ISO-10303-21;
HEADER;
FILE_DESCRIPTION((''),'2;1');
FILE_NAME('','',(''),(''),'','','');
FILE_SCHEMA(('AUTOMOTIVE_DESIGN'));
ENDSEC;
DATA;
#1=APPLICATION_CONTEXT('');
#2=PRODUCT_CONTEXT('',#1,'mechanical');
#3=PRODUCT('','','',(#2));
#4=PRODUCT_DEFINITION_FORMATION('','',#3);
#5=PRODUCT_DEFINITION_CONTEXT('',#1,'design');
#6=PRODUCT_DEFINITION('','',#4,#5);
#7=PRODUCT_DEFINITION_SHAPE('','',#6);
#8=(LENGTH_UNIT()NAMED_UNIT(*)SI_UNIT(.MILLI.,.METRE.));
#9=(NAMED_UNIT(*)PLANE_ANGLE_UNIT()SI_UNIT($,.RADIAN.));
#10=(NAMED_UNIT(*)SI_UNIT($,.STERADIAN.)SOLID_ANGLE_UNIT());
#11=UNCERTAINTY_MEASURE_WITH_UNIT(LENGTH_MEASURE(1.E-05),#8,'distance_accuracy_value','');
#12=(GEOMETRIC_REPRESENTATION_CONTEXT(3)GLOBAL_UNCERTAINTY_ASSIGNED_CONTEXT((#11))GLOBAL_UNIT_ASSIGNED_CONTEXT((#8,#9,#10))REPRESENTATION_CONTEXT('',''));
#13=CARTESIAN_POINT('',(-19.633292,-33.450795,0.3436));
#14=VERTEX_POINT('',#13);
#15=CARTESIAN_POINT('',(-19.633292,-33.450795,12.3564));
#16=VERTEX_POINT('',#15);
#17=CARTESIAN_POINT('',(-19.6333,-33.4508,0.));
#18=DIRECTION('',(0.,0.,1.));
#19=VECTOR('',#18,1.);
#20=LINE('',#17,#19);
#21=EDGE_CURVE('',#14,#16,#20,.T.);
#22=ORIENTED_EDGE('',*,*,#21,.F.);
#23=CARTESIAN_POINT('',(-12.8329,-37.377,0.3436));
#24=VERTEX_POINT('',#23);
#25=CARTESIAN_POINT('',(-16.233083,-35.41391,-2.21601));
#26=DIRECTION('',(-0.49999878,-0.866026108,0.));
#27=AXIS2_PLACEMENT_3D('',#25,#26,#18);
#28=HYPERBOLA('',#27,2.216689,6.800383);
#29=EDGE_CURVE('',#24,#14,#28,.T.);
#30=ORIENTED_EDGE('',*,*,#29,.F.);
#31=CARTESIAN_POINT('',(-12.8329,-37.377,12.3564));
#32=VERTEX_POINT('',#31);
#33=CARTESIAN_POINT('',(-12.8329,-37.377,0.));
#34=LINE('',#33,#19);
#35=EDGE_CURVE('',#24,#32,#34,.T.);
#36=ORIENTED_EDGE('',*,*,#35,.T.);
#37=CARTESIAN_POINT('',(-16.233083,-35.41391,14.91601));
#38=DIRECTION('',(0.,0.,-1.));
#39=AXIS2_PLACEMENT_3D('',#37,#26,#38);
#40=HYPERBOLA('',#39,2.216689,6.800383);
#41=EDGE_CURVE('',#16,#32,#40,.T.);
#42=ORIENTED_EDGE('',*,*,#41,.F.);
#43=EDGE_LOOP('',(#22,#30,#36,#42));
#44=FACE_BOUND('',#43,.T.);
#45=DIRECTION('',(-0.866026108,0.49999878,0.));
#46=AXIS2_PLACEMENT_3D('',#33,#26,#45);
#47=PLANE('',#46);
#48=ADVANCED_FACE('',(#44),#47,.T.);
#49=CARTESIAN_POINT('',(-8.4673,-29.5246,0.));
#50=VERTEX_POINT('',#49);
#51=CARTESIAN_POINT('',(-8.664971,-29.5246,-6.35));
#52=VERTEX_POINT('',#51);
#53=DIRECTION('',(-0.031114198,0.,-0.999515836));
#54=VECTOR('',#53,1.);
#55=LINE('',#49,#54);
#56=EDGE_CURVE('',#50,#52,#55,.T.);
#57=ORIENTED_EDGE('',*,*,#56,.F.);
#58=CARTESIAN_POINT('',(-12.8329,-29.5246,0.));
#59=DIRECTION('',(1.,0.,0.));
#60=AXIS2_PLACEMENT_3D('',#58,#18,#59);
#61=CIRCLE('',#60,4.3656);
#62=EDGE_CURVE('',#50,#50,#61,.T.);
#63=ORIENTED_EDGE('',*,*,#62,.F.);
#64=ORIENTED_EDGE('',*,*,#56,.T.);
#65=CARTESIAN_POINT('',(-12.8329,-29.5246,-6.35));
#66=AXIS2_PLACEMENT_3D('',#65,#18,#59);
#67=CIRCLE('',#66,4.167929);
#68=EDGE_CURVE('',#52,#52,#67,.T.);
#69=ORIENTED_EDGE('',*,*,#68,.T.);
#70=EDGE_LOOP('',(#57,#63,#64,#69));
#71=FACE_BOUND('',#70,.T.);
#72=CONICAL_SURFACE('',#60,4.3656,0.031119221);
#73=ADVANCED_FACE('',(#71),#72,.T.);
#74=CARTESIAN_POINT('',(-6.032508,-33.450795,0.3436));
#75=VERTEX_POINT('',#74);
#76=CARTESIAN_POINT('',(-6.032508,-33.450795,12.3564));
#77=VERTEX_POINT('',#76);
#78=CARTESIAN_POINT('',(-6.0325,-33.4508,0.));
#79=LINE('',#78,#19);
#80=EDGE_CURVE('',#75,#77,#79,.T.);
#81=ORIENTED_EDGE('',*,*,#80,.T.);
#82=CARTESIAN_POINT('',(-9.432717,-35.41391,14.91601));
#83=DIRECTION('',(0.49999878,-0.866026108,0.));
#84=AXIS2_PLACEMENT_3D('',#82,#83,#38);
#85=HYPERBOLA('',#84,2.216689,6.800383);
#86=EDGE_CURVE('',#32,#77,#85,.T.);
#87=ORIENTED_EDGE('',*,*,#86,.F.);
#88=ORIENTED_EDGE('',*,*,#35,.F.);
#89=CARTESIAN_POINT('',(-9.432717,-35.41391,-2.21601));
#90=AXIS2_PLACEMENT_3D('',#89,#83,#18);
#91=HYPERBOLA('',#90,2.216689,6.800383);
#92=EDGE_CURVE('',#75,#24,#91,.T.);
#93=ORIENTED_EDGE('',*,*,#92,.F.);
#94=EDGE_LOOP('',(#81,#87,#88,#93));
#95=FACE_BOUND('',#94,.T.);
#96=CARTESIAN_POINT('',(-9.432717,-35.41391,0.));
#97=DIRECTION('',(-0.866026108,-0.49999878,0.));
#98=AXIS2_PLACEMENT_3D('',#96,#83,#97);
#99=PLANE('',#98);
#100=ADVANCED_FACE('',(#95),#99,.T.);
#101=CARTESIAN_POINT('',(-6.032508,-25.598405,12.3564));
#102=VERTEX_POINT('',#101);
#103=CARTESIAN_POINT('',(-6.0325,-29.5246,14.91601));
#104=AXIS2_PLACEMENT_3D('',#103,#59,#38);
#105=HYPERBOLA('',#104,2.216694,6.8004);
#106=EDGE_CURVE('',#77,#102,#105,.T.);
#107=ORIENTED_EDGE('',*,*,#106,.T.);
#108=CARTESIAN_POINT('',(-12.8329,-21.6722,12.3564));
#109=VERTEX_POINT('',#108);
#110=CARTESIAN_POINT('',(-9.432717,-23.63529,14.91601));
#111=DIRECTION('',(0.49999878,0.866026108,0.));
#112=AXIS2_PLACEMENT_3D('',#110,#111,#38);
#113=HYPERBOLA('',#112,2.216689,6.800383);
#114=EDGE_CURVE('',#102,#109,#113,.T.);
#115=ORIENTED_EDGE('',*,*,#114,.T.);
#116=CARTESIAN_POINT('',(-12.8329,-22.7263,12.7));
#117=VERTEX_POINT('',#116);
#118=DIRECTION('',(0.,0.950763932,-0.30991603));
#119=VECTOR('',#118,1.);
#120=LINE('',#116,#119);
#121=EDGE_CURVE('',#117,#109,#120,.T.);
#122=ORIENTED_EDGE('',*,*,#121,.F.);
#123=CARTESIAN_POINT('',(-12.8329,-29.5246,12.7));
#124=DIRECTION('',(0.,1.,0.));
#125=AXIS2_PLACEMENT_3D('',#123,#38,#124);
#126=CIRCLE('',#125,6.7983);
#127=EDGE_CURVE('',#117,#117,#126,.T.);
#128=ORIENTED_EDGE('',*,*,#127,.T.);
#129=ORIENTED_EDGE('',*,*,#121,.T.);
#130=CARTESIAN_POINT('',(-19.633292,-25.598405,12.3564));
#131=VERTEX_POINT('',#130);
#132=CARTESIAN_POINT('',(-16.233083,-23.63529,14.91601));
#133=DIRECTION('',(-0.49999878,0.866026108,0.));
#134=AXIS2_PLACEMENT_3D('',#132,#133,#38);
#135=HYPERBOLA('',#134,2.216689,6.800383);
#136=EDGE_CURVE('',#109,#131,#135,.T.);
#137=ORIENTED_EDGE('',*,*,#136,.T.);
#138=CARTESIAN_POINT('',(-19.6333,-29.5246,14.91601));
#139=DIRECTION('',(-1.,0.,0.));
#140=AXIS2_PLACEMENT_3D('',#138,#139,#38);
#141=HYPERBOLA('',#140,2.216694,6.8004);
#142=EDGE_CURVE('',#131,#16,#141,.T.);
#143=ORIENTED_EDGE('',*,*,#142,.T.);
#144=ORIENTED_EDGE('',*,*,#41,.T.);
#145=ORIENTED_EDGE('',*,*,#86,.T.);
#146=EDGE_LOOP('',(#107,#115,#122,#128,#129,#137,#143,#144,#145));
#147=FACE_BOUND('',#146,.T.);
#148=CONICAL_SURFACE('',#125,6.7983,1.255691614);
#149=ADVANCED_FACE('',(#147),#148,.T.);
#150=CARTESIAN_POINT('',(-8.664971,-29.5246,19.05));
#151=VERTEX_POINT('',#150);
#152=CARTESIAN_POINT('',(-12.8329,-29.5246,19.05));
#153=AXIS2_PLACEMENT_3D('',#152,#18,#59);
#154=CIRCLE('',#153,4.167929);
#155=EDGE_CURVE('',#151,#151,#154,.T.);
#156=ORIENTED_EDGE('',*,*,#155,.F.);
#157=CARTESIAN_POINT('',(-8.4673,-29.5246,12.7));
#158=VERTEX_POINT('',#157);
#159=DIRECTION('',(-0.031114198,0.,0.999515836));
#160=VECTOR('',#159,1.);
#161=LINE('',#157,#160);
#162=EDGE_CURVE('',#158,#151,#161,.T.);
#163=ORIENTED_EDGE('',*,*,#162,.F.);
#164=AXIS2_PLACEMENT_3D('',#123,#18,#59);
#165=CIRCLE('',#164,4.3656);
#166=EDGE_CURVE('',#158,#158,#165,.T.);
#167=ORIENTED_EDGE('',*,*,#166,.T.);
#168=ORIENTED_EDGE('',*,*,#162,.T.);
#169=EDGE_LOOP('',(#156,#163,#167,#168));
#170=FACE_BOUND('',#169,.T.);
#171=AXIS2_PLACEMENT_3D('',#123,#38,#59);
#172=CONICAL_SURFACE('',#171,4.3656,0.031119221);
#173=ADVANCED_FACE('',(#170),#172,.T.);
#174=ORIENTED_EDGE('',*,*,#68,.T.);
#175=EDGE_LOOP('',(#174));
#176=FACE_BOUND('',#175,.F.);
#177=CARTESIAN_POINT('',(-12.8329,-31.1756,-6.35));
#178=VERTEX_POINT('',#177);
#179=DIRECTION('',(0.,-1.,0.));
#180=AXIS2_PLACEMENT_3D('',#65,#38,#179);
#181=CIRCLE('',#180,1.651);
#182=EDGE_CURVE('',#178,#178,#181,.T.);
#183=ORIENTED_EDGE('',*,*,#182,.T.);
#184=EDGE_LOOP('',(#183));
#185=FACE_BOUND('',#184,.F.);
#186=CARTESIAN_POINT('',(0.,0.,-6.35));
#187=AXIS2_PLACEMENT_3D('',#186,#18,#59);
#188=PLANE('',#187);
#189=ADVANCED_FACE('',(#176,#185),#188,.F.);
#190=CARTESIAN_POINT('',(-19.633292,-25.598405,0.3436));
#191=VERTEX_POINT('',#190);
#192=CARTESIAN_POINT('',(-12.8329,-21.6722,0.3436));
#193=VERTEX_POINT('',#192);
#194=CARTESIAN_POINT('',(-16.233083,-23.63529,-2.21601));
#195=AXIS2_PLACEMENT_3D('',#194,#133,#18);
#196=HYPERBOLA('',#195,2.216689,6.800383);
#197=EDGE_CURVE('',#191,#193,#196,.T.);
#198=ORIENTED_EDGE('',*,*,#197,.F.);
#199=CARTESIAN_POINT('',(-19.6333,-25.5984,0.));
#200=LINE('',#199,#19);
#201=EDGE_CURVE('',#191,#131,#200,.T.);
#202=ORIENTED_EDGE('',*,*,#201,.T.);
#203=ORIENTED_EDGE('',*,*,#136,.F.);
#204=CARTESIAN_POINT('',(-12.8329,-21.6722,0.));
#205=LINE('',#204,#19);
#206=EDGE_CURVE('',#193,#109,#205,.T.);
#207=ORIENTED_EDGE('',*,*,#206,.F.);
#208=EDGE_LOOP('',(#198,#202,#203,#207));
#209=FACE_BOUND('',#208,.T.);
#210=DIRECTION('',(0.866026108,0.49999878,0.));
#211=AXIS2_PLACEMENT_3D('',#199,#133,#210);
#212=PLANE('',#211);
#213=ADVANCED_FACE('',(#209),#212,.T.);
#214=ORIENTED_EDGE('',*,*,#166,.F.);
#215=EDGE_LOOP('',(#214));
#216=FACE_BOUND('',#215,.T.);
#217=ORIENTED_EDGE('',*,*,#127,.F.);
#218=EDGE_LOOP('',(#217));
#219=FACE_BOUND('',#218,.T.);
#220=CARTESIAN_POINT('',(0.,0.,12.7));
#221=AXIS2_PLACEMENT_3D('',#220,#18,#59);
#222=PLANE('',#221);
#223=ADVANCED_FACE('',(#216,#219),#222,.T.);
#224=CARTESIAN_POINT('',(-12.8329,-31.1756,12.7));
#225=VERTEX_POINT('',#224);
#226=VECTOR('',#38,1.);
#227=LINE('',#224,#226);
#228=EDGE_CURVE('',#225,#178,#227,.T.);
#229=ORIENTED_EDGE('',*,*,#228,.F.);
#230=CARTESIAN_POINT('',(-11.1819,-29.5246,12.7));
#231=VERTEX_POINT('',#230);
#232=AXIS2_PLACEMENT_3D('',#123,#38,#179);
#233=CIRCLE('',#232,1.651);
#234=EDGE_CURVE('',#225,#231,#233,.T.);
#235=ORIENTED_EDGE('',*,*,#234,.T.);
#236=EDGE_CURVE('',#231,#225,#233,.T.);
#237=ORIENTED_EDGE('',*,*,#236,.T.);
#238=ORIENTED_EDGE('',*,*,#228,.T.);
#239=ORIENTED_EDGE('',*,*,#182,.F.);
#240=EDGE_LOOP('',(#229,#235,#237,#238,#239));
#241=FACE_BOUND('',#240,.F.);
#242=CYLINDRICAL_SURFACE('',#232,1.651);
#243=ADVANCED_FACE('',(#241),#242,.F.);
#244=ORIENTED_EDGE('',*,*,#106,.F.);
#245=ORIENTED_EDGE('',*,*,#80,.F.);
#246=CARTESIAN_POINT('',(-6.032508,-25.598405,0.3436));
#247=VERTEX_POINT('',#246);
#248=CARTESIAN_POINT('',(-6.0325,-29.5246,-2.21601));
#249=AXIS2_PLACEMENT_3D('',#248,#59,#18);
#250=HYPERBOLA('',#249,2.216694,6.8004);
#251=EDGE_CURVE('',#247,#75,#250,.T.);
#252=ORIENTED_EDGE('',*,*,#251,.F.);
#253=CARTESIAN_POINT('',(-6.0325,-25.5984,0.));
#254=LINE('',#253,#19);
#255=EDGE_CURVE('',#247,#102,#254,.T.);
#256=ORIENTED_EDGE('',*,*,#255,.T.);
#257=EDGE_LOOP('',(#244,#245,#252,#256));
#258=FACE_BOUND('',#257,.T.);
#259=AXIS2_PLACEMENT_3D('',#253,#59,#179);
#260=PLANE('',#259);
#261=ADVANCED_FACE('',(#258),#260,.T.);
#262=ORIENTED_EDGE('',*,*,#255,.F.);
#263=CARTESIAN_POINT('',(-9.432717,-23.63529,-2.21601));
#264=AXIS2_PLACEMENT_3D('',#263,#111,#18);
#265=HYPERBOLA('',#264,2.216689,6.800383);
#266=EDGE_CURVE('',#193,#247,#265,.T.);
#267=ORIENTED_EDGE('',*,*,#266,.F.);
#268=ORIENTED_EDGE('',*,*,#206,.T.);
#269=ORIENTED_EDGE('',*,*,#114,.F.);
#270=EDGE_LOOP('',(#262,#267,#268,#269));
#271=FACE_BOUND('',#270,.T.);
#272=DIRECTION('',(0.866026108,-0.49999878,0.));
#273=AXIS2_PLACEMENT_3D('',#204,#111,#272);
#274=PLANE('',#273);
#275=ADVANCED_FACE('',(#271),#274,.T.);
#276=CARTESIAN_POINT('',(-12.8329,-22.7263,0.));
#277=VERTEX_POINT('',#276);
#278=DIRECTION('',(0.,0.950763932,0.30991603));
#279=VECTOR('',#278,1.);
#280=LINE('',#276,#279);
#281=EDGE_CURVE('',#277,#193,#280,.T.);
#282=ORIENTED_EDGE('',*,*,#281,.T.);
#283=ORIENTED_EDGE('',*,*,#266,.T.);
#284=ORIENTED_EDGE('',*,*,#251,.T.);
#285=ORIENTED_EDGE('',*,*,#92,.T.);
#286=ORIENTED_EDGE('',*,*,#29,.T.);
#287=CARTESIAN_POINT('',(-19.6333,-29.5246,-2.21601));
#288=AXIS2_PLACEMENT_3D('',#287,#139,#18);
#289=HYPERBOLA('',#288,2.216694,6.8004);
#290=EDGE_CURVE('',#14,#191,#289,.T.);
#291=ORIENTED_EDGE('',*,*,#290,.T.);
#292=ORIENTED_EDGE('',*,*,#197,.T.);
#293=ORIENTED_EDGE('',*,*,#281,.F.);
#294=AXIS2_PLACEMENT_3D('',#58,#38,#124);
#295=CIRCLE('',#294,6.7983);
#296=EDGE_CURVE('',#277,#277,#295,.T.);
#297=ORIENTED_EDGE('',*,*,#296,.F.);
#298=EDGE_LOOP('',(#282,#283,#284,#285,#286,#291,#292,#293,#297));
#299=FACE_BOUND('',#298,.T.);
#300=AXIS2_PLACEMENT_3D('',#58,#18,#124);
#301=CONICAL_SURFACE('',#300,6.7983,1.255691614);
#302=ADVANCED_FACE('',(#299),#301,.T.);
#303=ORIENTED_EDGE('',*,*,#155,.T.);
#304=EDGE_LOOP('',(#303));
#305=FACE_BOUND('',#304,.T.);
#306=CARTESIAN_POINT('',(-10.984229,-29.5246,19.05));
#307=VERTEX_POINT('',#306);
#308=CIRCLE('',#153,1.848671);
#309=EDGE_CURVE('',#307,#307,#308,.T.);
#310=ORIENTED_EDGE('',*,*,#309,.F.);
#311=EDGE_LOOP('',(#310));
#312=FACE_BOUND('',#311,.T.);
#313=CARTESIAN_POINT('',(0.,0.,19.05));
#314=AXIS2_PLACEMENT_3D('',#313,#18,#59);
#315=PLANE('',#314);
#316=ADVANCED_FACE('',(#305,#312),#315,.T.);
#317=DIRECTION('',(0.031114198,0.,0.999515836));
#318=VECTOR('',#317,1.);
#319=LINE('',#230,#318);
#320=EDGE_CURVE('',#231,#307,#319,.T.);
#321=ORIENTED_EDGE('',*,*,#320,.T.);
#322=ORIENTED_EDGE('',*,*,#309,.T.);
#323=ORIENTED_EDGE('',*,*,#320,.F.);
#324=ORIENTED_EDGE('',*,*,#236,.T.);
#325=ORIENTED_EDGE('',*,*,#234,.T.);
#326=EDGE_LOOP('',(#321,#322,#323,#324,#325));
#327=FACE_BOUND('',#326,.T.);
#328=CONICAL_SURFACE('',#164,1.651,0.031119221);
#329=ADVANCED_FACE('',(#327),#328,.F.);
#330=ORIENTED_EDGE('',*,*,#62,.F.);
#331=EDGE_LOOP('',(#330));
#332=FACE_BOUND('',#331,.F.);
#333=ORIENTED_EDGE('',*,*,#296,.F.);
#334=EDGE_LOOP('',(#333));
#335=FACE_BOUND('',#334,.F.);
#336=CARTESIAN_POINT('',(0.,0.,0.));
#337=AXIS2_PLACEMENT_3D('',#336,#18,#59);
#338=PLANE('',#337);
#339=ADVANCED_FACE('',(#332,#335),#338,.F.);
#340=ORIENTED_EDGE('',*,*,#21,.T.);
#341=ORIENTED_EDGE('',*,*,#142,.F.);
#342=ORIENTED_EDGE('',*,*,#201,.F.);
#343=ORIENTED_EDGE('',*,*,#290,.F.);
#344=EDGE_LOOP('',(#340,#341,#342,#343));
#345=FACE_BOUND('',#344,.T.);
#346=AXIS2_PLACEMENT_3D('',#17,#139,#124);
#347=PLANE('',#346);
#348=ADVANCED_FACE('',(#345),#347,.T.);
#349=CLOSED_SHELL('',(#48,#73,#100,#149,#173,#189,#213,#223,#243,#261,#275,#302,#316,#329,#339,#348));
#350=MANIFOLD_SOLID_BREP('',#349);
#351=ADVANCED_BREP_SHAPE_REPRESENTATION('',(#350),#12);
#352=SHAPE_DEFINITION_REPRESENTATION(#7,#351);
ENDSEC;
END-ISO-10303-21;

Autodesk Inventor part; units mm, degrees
ref_plane "YZ Plane" through (0, 0, 0) normal (1, 0, 0) x (0, 1, 0)
sketch "Sketch1" plane through (0, 0, 0) normal (0, 0, 1) x (1, 0, 0)
  circle A0 centre (-12.8329, -29.5246) radius 6.35
  line L0 (-6.0325, -33.4508) -> (-12.8329, -37.377)
  line L1 (-12.8329, -37.377) -> (-19.6333, -33.4508)
  line L2 (-19.6333, -33.4508) -> (-19.6333, -25.5984)
  line L3 (-19.6333, -25.5984) -> (-12.8329, -21.6722)
  line L4 (-12.8329, -21.6722) -> (-6.0325, -25.5984)
  line L5 (-6.0325, -25.5984) -> (-6.0325, -33.4508)
  circle A1 centre (-12.8329, -29.5246) radius 4.3656
  circle A2 centre (-12.8329, -29.5246) radius 6.35
  circle A3 centre (-12.8329, -29.5246) radius 6.8004
  line L6 (-12.8329, -21.6722) -> (-12.8329, -22.7242) construction
  dimension "d36" = 13.6008
  dimension "d37" = 1.052
extrude "Extrusion1" add sketch "Sketch1" along normal blind 12.7 contours A0 | L0 A3 L5 | L0 L1 A3 | A3 | A3 L4 L5 | L1 L2 A3 | A3 L3 L4 | L2 L3 A3 | A1
ref_plane "Work Plane1" through (-12.8329, -37.377, 0) normal (-1, 0, 0) x (0, 0, 1)
extrude "Extrusion3" add sketch "Sketch1" against normal blind 6.35 draft -1.783 contours A1
thread "Thread2" size "1/8" designation "1/8 - 27 NPT" standard "NPT for PVC Pipe and Fitting" length 9.9568
sketch "Sketch6" plane through (0, 0, 12.7) normal (0, 0, 1) x (1, 0, 0)
  circle A0 centre (-12.8329, -29.5246) radius 6.35 projected
  point P0 (0, 0)
hole "Hole2" at (-12.8329, -29.5246, 12.7) direction (0, 0, -1) diameter 3.302 end through all
sketch "Sketch7" plane through (0, 0, 12.7) normal (0, 0, 1) x (1, 0, 0)
  circle A0 centre (-12.8329, -29.5246) radius 1.651 projected
  circle A1 centre (-12.8329, -29.5246) radius 4.3656 projected
  point P0 (0, 0)
extrude "Extrusion4" add sketch "Sketch7" along normal blind 6.35 draft -1.783
thread "Thread3" size "1/8" designation "1/8 - 27 NPT" standard "NPT for PVC Pipe and Fitting" length 9.9568
sketch "Sketch8" plane through (-12.8329, -37.377, 0) normal (-1, 0, 0) x (0, 0, 1)
  line L0 (12.7, 14.6507) -> (12.3564, 15.7048)
  line L1 (12.3564, 15.7048) -> (12.7, 14.6507)
  line L2 (12.3564, 15.7048) -> (12.7, 15.7048)
  line L3 (12.7, 15.7048) -> (12.7, 14.6507)
  line L4 (12.7, 15.7048) -> (12.7, 11.7786) projected
  line L5 (16.6116, 7.8524) -> (-10.7696, 7.8524) projected
  point P0 (0, 37.377)
  point P1 (-6.858, -1.905)
  dimension "d38" = 1.0541
revolve "Revolution3" cut sketch "Sketch8" angle 360 about axis through (-12.8329, -29.5246, 0) along (0, 0, -1)
ref_plane "Work Plane4" through (-12.8329, -29.5246, 6.35) normal (0, 0, 1) x (1, 0, 0)
mirror "Mirror4" about plane through (-12.8329, -29.5246, 6.35) normal (0, 0, 1) of "Revolution3"
properties part number "Pneumatic_VIAIR_Fitting"
